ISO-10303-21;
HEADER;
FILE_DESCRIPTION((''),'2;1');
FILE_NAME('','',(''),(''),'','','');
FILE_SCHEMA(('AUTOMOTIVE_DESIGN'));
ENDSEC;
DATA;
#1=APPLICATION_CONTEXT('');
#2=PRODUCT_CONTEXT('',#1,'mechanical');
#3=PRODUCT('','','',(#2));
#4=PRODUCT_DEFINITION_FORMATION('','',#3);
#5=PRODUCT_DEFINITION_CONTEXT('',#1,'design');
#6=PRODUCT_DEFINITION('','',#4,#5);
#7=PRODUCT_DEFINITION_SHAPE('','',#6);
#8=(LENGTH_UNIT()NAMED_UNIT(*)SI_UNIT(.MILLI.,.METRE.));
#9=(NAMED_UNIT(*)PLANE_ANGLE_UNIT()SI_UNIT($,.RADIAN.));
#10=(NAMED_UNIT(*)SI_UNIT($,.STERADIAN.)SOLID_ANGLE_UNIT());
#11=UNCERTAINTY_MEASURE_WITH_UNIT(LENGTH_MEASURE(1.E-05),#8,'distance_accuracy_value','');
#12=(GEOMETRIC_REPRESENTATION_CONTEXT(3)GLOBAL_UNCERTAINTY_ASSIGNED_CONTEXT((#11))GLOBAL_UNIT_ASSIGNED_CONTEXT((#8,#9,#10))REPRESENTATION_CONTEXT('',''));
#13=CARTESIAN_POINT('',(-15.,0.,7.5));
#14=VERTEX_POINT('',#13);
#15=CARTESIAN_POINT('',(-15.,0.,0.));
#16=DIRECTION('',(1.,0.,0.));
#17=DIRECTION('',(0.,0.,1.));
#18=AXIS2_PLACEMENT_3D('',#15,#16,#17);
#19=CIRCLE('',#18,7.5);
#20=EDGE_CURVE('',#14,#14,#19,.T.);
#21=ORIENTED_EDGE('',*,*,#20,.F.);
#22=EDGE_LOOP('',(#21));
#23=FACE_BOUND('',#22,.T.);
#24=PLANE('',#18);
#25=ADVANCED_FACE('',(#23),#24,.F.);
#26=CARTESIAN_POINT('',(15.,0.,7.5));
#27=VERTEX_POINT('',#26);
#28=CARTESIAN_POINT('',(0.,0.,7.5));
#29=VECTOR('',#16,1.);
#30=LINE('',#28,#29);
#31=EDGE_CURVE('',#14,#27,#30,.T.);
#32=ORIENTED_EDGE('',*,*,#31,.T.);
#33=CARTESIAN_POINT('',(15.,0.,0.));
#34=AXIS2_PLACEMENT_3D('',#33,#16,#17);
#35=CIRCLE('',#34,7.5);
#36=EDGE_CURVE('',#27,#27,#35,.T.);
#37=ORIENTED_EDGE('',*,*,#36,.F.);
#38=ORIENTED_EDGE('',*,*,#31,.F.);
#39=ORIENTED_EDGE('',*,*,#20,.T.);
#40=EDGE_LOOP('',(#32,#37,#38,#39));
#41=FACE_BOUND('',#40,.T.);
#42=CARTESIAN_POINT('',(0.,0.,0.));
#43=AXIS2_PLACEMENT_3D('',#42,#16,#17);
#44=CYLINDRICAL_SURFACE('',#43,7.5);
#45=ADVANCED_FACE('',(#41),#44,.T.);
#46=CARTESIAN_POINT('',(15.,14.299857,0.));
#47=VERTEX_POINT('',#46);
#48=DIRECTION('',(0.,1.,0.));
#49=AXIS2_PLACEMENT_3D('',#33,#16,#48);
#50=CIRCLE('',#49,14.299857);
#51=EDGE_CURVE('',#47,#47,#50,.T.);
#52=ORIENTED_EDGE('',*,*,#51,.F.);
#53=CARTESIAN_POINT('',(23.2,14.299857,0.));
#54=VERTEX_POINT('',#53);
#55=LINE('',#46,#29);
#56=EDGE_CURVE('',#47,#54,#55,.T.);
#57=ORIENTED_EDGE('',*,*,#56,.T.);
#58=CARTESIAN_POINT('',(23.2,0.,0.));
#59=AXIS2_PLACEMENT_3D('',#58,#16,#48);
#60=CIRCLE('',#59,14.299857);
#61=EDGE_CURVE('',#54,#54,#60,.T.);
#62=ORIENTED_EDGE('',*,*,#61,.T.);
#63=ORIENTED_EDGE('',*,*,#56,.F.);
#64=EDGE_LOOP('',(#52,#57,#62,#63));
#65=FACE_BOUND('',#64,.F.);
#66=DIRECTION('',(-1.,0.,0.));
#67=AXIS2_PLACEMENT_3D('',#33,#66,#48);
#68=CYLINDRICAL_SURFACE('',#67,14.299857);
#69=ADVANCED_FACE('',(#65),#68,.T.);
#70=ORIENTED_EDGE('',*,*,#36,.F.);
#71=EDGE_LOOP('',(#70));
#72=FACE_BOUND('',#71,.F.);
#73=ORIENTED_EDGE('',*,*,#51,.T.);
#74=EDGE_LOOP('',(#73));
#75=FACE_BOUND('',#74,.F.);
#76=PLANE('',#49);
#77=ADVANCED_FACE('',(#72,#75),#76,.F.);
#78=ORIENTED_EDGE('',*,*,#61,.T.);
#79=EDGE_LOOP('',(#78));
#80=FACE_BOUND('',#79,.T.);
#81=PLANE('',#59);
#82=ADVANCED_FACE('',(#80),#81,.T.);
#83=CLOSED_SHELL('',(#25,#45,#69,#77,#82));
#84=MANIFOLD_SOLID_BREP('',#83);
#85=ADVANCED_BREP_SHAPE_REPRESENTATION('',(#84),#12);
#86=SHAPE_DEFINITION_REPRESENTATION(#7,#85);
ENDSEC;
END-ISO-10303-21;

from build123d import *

# Parameters (mm, degrees)
F0_W     = 30
F0_H     = 7.5
F2_R     = 14.2998571377
F2_R_2   = 7.5
F3_DEPTH = 8.2


with BuildPart() as f1:
    # F0 (on Front) → F1 (revolve)
    with BuildSketch(Plane.XZ):
        with Locations((0, 3.75)):
            Rectangle(F0_W, F0_H)
    revolve(axis=Axis((0, 0, 0), (1, 0, 0)))

    # F2 (on face) → F3 (join)
    with BuildSketch(Plane.YZ.offset(15)):
        Circle(F2_R)
        Circle(F2_R_2, mode=Mode.SUBTRACT)
        Circle(F2_R_2)
    extrude(amount=F3_DEPTH)


solid = f1.part
